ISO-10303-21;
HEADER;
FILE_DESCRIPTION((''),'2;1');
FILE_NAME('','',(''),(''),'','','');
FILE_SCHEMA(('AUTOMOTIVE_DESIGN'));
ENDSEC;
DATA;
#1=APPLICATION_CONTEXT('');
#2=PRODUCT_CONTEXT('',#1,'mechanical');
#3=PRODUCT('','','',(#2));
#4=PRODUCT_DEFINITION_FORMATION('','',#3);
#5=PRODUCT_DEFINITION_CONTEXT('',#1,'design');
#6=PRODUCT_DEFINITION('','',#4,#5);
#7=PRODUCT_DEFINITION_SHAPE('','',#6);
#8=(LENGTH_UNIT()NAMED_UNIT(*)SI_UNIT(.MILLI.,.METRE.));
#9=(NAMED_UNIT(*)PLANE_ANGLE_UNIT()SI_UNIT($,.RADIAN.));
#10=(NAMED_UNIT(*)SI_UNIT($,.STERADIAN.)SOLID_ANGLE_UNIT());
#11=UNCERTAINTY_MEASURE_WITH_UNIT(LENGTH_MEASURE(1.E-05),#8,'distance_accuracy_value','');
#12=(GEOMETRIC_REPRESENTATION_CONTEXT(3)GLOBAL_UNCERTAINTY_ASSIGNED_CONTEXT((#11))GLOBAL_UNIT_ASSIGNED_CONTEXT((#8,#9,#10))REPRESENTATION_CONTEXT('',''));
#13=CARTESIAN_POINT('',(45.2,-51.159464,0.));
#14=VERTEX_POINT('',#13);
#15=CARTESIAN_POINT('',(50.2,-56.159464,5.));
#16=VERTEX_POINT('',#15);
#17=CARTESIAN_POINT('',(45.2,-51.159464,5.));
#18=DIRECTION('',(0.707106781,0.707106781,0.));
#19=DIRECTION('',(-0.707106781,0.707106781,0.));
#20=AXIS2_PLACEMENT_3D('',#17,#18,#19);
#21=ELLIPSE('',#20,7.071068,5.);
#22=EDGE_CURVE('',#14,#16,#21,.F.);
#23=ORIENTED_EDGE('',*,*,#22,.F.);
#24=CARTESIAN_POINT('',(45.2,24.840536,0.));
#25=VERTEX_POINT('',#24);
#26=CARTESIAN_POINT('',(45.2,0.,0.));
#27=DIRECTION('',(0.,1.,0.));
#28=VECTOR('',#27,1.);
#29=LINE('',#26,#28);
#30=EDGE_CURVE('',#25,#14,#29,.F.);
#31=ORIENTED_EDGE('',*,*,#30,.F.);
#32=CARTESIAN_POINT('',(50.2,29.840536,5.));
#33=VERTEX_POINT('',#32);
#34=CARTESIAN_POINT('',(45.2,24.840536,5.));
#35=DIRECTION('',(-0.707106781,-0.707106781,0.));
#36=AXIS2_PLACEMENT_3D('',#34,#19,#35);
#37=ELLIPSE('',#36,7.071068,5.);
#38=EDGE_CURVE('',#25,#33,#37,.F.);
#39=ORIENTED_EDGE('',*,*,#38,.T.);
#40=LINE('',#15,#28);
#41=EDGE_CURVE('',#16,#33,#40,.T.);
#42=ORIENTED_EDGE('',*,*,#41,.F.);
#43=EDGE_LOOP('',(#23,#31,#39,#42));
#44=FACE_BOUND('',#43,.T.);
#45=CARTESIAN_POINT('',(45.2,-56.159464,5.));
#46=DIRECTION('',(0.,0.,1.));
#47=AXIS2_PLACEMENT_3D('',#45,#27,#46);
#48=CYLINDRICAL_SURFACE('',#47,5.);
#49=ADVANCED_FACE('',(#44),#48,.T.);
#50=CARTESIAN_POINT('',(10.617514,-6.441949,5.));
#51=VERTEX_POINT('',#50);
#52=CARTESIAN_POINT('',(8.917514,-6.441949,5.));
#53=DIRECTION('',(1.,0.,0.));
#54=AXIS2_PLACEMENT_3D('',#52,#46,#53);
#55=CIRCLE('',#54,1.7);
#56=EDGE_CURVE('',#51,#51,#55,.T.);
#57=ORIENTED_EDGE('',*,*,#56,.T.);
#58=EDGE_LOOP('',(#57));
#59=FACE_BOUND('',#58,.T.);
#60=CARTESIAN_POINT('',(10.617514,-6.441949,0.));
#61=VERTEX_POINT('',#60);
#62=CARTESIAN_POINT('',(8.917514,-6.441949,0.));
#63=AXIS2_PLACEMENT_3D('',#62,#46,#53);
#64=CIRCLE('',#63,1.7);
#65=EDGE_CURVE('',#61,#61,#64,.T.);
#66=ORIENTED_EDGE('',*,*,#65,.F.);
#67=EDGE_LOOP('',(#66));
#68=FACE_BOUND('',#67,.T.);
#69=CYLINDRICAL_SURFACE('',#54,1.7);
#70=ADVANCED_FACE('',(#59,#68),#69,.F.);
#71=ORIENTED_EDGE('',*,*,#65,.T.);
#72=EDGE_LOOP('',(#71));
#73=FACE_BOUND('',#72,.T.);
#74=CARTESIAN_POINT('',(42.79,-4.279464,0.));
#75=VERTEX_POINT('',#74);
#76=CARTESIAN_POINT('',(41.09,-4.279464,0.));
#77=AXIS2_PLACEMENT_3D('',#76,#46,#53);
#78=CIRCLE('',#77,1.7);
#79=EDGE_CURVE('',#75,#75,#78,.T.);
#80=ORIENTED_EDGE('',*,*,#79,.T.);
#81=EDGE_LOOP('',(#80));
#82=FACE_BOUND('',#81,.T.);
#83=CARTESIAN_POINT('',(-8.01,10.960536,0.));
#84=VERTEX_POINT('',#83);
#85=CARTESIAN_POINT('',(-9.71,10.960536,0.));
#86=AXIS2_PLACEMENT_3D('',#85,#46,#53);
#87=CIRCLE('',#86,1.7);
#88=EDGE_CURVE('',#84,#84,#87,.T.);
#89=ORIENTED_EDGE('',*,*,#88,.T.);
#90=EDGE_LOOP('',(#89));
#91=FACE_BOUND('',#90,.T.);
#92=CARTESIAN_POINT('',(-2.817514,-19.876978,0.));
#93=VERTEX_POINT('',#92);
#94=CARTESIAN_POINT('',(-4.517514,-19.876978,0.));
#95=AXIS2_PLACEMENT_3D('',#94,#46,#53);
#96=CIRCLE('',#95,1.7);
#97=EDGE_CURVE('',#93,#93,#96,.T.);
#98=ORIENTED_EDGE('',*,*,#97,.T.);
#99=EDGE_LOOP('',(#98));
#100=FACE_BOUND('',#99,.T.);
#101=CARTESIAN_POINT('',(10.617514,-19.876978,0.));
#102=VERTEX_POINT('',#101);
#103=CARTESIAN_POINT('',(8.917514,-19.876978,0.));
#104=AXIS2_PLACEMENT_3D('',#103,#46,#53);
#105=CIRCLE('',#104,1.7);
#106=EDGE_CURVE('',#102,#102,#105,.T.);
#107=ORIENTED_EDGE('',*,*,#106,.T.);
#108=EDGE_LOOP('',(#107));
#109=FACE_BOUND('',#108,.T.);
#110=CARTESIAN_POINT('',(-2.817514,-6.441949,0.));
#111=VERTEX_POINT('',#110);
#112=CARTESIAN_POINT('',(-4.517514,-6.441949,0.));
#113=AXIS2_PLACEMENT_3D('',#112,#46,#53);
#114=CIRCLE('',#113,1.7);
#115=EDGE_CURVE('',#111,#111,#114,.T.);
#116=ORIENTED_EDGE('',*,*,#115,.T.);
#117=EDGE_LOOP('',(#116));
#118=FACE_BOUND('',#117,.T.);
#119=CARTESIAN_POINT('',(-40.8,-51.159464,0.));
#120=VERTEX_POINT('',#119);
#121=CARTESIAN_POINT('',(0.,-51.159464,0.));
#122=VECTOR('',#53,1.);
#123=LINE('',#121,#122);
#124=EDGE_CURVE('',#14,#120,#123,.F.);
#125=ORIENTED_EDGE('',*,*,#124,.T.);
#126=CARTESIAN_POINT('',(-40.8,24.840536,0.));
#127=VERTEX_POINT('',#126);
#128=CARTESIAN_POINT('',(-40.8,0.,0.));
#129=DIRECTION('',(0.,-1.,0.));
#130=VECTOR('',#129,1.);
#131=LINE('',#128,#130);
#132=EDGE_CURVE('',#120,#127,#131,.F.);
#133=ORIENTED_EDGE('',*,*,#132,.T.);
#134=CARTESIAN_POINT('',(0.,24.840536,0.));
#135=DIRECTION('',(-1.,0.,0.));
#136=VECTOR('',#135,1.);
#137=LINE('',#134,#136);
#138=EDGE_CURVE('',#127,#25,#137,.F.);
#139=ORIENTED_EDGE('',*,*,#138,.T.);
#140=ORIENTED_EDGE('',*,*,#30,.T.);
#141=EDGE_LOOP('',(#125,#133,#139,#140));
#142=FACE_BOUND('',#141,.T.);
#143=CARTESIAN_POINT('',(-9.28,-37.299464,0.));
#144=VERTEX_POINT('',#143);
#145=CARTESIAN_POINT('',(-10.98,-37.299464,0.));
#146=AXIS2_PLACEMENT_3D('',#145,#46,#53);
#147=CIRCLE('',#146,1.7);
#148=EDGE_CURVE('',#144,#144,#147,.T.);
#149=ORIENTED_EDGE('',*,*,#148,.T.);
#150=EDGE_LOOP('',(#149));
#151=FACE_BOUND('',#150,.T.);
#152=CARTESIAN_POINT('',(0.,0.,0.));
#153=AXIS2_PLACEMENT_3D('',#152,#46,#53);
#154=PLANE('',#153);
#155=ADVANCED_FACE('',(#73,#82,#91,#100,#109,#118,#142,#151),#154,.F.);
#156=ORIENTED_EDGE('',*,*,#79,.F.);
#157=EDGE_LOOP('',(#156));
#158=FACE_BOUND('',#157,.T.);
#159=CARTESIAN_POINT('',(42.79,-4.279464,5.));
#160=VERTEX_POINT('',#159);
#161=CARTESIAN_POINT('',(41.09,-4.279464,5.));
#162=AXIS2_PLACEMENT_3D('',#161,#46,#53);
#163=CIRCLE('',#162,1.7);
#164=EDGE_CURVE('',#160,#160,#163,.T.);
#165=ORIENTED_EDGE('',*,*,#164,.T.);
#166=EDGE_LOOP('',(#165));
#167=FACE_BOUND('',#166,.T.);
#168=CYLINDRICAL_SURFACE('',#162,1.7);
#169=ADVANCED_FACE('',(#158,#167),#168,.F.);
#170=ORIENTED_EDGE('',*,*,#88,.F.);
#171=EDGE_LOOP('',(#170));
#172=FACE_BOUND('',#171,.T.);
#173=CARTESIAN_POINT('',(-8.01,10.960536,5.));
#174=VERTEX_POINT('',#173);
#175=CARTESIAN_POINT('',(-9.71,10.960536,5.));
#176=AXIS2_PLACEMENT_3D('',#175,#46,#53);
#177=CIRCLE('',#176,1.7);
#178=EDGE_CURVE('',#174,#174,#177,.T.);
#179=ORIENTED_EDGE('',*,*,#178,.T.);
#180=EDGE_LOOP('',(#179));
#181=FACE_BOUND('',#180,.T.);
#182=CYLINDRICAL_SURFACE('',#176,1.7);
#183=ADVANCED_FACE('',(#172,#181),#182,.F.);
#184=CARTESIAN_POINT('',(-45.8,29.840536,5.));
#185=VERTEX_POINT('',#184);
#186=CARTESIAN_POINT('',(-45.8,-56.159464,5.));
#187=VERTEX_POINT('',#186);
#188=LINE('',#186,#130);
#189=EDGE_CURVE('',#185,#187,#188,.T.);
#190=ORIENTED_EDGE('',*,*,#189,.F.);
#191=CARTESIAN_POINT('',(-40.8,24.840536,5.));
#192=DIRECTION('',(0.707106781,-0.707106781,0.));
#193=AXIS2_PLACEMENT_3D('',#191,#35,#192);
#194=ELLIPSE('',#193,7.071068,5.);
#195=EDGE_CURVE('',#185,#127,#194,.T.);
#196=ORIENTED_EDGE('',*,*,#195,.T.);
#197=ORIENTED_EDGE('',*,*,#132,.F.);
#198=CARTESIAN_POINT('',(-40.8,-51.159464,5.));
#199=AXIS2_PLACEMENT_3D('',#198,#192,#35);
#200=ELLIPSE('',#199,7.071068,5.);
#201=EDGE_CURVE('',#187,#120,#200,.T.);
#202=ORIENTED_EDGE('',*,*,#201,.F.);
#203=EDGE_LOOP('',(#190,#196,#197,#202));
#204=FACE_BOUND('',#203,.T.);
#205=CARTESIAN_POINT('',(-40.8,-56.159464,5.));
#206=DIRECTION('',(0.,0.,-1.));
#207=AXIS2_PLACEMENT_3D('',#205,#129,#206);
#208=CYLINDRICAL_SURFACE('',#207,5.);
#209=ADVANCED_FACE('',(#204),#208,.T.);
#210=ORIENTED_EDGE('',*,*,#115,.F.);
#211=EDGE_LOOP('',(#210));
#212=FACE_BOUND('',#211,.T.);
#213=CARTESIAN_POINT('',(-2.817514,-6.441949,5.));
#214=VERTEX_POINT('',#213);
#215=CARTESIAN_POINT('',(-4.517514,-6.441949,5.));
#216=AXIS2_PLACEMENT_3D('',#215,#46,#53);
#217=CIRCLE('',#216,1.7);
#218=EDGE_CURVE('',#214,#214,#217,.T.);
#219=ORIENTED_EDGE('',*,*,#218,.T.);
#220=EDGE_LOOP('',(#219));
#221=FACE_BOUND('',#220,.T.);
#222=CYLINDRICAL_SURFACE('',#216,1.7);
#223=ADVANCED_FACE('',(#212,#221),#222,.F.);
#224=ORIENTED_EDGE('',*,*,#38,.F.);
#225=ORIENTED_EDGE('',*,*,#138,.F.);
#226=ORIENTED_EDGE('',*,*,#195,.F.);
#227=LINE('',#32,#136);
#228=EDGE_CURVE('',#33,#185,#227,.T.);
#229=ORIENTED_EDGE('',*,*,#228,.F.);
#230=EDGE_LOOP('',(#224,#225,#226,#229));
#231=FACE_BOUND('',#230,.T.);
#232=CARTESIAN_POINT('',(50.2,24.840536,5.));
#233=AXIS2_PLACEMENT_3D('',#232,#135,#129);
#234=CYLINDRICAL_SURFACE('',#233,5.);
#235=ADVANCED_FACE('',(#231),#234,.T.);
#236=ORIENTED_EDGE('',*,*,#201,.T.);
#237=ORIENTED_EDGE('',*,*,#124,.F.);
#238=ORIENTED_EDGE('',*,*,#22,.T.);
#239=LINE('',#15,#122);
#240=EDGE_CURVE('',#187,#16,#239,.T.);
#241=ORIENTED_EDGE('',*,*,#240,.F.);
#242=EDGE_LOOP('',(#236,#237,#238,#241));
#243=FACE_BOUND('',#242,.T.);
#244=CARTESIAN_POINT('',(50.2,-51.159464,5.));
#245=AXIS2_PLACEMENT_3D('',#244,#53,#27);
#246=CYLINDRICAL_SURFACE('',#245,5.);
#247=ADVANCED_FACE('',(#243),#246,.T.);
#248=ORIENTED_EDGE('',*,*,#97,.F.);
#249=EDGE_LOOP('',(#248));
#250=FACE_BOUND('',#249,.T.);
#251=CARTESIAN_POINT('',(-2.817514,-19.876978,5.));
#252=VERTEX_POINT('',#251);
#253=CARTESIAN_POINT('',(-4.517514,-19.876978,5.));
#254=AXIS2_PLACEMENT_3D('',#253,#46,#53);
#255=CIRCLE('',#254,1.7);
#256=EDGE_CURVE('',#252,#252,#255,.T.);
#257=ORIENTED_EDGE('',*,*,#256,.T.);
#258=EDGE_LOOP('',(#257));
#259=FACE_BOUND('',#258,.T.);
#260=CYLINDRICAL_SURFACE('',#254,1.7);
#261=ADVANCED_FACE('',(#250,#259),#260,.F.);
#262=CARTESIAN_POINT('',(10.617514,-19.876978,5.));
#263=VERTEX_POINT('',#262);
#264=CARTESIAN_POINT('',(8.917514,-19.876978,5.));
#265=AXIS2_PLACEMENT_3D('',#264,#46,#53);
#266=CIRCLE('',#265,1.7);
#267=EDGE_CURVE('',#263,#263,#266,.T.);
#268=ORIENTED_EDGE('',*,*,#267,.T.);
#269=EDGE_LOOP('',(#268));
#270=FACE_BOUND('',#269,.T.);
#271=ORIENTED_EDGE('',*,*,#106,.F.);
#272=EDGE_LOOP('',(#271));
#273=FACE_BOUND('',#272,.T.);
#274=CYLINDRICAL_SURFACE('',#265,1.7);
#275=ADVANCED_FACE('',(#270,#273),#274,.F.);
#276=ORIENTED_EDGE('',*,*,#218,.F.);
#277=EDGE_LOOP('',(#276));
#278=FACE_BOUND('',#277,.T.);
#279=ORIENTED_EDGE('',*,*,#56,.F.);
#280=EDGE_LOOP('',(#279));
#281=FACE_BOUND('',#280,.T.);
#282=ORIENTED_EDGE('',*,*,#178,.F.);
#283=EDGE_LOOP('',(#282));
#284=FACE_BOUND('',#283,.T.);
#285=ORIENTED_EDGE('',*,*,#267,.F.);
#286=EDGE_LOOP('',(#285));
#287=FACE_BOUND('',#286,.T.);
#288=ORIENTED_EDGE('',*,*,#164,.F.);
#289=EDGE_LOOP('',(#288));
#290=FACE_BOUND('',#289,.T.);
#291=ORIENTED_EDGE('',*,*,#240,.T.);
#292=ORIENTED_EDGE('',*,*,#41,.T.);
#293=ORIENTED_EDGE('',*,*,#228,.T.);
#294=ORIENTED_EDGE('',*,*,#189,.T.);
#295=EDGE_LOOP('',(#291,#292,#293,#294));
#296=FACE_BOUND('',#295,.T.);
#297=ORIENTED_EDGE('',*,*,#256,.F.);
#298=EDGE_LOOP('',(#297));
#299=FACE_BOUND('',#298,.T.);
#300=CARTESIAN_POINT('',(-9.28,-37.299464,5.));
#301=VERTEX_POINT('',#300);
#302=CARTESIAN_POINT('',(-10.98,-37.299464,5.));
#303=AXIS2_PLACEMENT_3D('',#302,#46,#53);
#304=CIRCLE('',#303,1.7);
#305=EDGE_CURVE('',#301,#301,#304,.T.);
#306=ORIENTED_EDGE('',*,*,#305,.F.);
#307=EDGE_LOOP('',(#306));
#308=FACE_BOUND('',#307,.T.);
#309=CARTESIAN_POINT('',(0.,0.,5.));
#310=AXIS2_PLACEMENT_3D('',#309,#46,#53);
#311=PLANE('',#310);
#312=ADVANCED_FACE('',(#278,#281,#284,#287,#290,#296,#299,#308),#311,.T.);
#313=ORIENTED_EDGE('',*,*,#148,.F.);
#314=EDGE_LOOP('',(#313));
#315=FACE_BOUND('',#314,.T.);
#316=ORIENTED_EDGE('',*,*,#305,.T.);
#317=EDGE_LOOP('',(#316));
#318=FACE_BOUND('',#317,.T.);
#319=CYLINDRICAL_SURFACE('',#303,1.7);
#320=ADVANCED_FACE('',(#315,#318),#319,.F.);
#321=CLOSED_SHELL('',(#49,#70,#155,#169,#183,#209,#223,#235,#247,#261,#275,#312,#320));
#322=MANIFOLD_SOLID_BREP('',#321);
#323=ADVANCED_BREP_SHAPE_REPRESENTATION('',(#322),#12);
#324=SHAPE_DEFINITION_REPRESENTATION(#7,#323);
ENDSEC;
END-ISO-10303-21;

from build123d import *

# Parameters (mm, degrees)
ESQUISSE1_W        = 96
ESQUISSE1_H        = 86
BOSS_EXTRU_1_DEPTH = 5
CONG_2_R           = 5
TROUM3_D           = 3.4


with BuildPart() as part:
    # Esquisse1 → Boss.-Extru.1 (new body)
    with BuildSketch(Plane.XY):
        with Locations((2.2, -13.159463773)):
            Rectangle(ESQUISSE1_W, ESQUISSE1_H)
    extrude(amount=BOSS_EXTRU_1_DEPTH)

    # Congé2
    cong_2_edges = [part.edges().sort_by_distance(p)[0] for p in [
        (-45.8, -13.159463773, 0),
        (2.2, -56.159463773, 0),
        (50.2, -13.159463773, 0),
        (2.2, 29.840536227, 0),
    ]]
    fillet(cong_2_edges, radius=CONG_2_R - 0.0001)  # a hair under: the kernel refuses the full size

    # TrouM3 (through all)
    with Locations(Plane.XY.offset(5)):
        with Locations((-9.71, 10.960536227), (41.09, -4.279463773), (-10.98, -37.299463773), (-4.517514421, -19.876978194), (-4.517514421, -6.441949352), (8.917514421, -6.441949352), (8.917514421, -19.876978194)):
            Hole(TROUM3_D / 2)


solid = part.part
